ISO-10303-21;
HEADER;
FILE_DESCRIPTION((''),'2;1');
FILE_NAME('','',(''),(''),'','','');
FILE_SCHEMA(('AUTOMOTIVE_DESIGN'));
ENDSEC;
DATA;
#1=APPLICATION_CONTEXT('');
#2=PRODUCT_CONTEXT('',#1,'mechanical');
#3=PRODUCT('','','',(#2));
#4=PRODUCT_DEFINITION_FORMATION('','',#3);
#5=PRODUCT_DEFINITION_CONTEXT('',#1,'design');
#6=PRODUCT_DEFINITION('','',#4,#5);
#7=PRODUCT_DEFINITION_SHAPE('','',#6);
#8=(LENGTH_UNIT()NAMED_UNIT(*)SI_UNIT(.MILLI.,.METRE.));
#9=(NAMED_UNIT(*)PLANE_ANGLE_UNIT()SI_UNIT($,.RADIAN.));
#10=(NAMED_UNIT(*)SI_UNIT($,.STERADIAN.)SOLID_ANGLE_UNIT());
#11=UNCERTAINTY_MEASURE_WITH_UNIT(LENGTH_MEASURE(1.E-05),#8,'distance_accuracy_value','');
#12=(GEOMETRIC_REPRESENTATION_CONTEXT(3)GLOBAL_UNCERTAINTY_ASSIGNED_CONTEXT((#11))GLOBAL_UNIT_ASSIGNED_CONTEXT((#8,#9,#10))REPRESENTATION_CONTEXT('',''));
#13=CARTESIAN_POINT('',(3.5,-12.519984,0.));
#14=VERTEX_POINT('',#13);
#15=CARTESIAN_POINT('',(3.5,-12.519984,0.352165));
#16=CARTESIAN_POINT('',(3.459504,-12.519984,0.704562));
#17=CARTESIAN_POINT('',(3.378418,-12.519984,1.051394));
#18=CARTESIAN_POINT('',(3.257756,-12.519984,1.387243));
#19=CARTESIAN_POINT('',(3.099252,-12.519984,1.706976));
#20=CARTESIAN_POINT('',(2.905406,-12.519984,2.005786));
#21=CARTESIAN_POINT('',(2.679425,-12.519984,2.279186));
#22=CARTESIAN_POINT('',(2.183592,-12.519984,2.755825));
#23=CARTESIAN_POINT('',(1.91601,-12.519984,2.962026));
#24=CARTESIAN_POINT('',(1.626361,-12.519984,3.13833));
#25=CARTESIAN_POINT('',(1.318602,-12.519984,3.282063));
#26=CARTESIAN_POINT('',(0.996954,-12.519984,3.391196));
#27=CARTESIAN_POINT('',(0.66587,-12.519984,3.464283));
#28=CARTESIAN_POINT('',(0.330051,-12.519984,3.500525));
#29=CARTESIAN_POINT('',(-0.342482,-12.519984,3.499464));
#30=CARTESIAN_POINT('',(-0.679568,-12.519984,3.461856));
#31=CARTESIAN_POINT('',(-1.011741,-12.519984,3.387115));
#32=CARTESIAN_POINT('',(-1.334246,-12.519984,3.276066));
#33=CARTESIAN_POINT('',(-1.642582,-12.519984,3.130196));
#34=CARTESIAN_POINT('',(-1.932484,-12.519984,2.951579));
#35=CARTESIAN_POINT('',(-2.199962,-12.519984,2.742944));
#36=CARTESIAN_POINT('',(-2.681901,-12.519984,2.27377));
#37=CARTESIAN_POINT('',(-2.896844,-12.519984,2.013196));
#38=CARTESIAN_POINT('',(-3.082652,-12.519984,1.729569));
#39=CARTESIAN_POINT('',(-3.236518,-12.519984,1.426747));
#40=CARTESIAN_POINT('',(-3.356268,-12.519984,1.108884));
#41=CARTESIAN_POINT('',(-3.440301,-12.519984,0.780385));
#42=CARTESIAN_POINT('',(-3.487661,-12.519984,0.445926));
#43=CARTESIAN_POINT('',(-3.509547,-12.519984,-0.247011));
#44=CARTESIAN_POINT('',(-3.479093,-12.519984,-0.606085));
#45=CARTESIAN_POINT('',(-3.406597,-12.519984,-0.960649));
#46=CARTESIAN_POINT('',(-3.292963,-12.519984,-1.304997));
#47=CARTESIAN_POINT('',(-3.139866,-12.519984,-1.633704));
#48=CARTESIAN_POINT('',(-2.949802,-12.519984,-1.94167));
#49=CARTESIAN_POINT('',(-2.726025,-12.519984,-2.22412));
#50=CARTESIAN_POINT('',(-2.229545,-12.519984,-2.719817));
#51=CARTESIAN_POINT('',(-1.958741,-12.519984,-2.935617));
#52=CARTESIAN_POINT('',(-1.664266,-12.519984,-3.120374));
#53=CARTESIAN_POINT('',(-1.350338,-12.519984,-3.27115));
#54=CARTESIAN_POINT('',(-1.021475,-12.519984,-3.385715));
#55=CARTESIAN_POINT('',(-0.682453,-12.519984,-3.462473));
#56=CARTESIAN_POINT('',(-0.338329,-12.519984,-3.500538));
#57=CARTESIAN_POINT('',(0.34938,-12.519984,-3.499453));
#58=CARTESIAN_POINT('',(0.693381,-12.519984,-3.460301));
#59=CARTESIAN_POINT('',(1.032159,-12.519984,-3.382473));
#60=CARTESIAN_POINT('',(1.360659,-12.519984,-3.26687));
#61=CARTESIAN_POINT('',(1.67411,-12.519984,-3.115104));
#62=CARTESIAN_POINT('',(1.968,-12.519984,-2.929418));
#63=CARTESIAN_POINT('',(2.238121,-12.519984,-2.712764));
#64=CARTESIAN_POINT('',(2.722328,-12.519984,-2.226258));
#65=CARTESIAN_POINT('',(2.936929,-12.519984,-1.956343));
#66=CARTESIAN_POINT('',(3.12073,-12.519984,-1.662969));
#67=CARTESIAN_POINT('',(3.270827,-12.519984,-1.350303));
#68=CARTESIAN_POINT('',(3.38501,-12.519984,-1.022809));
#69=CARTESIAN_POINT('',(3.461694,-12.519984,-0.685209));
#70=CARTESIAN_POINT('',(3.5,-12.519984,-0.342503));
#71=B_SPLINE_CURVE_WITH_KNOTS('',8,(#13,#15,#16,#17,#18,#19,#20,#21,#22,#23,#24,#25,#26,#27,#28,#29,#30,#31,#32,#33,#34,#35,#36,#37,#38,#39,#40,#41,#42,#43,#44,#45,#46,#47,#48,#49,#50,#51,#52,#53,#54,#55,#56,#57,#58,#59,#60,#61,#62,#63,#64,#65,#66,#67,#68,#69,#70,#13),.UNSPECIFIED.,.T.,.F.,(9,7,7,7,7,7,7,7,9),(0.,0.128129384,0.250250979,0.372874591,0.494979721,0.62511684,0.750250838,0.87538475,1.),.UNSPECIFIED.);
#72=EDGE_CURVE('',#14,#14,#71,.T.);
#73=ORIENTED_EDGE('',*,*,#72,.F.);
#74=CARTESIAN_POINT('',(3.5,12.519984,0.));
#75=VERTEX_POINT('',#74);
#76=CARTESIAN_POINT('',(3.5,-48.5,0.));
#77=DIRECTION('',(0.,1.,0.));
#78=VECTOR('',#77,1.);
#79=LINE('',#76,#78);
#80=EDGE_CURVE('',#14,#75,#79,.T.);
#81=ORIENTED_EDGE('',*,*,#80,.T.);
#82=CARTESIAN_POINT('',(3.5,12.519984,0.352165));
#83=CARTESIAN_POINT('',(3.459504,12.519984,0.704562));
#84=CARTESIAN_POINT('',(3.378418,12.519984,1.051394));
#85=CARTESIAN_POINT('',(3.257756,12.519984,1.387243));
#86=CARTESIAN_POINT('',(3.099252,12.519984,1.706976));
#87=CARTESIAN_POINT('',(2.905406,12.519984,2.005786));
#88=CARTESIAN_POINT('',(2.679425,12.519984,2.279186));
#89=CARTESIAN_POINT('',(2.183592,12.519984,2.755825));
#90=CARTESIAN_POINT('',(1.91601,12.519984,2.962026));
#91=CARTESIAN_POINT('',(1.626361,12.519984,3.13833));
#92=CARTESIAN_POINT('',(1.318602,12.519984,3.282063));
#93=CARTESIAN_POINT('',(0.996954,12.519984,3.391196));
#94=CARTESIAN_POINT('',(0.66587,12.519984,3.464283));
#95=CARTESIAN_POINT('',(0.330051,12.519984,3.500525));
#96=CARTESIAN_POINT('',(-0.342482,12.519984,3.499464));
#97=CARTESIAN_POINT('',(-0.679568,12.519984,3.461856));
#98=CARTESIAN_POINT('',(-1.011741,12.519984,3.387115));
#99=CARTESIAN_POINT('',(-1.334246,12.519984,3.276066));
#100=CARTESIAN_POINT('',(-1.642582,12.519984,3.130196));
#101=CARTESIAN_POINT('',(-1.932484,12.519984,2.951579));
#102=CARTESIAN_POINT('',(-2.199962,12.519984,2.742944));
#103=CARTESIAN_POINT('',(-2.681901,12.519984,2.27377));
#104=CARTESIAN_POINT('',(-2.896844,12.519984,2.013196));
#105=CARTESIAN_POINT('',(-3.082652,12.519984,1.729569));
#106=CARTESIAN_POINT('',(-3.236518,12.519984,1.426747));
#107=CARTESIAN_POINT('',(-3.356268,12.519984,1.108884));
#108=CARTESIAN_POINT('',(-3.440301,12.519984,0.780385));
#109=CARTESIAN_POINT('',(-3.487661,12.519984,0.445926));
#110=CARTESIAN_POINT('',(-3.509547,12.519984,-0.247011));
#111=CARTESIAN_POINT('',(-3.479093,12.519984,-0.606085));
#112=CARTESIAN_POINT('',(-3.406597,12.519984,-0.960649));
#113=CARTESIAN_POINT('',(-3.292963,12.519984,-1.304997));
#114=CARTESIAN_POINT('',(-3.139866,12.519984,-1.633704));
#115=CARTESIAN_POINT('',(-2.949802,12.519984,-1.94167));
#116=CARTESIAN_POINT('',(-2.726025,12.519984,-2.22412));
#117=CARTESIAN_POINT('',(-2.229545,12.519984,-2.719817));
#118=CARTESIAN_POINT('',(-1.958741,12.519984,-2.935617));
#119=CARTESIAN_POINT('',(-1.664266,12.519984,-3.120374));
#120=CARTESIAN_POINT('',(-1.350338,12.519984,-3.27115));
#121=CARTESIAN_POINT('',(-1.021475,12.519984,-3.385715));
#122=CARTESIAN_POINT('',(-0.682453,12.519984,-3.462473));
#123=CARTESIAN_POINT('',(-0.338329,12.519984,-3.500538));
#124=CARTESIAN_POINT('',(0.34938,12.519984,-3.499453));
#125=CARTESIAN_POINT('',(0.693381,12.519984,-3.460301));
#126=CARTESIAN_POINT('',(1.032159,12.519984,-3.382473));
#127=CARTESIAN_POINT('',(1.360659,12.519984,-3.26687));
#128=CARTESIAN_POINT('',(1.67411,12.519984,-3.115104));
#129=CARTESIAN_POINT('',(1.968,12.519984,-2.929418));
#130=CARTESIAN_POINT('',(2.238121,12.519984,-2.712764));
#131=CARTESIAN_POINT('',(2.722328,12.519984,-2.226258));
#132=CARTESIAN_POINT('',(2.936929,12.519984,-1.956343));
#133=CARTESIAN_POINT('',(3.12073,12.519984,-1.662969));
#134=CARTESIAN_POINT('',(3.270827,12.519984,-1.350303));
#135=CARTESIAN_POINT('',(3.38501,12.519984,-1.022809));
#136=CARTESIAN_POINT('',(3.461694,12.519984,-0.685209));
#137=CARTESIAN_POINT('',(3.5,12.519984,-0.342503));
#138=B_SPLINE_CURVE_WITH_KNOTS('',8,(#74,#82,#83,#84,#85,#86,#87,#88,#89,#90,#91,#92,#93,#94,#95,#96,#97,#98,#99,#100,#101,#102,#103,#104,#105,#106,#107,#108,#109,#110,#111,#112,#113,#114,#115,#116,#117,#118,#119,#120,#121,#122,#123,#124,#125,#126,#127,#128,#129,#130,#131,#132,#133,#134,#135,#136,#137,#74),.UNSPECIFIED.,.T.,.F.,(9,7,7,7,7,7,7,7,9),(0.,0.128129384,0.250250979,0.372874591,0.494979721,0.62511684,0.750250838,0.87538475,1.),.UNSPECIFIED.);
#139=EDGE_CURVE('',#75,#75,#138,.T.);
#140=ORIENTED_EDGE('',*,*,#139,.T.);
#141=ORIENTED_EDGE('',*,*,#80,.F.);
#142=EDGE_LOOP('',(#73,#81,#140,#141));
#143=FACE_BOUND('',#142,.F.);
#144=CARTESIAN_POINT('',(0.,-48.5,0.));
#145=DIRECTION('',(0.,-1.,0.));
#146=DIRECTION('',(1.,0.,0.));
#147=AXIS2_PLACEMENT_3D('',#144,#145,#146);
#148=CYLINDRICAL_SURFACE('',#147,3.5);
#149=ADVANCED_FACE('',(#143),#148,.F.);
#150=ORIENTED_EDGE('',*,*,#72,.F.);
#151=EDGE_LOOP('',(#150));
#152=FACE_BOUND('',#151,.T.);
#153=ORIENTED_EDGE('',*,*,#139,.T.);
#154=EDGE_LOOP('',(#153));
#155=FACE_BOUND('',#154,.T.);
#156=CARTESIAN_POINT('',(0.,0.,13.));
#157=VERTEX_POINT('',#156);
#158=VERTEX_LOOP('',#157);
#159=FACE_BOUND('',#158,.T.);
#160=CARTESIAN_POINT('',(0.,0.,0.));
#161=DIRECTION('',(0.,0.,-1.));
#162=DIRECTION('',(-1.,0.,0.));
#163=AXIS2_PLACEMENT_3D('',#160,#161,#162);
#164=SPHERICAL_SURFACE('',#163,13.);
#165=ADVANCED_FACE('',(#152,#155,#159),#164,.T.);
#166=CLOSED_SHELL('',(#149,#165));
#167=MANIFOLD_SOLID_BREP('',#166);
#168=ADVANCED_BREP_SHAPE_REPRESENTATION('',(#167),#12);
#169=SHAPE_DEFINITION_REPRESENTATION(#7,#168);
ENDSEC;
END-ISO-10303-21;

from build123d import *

# Parameters (mm, degrees)
F3_R     = 3.5
F4_DEPTH = 128.4


with BuildPart() as f1:
    # F0 (on Front) → F1 (revolve)
    with BuildSketch(Plane.XZ):
        with BuildLine():
            Line((0, 0), (0, 13))
            ThreePointArc((0, 13), (-13, 0), (0, -13))
            Line((0, -13), (0, 0))
        make_face()
    revolve(axis=Axis((0, 0, -0.8736374089), (0, 0, -1)))

    # F3 (on offset) → F4 (cut)
    with BuildSketch(Plane.XZ.offset(48.5)):
        Circle(F3_R)
    extrude(amount=-F4_DEPTH, mode=Mode.SUBTRACT)


solid = f1.part
